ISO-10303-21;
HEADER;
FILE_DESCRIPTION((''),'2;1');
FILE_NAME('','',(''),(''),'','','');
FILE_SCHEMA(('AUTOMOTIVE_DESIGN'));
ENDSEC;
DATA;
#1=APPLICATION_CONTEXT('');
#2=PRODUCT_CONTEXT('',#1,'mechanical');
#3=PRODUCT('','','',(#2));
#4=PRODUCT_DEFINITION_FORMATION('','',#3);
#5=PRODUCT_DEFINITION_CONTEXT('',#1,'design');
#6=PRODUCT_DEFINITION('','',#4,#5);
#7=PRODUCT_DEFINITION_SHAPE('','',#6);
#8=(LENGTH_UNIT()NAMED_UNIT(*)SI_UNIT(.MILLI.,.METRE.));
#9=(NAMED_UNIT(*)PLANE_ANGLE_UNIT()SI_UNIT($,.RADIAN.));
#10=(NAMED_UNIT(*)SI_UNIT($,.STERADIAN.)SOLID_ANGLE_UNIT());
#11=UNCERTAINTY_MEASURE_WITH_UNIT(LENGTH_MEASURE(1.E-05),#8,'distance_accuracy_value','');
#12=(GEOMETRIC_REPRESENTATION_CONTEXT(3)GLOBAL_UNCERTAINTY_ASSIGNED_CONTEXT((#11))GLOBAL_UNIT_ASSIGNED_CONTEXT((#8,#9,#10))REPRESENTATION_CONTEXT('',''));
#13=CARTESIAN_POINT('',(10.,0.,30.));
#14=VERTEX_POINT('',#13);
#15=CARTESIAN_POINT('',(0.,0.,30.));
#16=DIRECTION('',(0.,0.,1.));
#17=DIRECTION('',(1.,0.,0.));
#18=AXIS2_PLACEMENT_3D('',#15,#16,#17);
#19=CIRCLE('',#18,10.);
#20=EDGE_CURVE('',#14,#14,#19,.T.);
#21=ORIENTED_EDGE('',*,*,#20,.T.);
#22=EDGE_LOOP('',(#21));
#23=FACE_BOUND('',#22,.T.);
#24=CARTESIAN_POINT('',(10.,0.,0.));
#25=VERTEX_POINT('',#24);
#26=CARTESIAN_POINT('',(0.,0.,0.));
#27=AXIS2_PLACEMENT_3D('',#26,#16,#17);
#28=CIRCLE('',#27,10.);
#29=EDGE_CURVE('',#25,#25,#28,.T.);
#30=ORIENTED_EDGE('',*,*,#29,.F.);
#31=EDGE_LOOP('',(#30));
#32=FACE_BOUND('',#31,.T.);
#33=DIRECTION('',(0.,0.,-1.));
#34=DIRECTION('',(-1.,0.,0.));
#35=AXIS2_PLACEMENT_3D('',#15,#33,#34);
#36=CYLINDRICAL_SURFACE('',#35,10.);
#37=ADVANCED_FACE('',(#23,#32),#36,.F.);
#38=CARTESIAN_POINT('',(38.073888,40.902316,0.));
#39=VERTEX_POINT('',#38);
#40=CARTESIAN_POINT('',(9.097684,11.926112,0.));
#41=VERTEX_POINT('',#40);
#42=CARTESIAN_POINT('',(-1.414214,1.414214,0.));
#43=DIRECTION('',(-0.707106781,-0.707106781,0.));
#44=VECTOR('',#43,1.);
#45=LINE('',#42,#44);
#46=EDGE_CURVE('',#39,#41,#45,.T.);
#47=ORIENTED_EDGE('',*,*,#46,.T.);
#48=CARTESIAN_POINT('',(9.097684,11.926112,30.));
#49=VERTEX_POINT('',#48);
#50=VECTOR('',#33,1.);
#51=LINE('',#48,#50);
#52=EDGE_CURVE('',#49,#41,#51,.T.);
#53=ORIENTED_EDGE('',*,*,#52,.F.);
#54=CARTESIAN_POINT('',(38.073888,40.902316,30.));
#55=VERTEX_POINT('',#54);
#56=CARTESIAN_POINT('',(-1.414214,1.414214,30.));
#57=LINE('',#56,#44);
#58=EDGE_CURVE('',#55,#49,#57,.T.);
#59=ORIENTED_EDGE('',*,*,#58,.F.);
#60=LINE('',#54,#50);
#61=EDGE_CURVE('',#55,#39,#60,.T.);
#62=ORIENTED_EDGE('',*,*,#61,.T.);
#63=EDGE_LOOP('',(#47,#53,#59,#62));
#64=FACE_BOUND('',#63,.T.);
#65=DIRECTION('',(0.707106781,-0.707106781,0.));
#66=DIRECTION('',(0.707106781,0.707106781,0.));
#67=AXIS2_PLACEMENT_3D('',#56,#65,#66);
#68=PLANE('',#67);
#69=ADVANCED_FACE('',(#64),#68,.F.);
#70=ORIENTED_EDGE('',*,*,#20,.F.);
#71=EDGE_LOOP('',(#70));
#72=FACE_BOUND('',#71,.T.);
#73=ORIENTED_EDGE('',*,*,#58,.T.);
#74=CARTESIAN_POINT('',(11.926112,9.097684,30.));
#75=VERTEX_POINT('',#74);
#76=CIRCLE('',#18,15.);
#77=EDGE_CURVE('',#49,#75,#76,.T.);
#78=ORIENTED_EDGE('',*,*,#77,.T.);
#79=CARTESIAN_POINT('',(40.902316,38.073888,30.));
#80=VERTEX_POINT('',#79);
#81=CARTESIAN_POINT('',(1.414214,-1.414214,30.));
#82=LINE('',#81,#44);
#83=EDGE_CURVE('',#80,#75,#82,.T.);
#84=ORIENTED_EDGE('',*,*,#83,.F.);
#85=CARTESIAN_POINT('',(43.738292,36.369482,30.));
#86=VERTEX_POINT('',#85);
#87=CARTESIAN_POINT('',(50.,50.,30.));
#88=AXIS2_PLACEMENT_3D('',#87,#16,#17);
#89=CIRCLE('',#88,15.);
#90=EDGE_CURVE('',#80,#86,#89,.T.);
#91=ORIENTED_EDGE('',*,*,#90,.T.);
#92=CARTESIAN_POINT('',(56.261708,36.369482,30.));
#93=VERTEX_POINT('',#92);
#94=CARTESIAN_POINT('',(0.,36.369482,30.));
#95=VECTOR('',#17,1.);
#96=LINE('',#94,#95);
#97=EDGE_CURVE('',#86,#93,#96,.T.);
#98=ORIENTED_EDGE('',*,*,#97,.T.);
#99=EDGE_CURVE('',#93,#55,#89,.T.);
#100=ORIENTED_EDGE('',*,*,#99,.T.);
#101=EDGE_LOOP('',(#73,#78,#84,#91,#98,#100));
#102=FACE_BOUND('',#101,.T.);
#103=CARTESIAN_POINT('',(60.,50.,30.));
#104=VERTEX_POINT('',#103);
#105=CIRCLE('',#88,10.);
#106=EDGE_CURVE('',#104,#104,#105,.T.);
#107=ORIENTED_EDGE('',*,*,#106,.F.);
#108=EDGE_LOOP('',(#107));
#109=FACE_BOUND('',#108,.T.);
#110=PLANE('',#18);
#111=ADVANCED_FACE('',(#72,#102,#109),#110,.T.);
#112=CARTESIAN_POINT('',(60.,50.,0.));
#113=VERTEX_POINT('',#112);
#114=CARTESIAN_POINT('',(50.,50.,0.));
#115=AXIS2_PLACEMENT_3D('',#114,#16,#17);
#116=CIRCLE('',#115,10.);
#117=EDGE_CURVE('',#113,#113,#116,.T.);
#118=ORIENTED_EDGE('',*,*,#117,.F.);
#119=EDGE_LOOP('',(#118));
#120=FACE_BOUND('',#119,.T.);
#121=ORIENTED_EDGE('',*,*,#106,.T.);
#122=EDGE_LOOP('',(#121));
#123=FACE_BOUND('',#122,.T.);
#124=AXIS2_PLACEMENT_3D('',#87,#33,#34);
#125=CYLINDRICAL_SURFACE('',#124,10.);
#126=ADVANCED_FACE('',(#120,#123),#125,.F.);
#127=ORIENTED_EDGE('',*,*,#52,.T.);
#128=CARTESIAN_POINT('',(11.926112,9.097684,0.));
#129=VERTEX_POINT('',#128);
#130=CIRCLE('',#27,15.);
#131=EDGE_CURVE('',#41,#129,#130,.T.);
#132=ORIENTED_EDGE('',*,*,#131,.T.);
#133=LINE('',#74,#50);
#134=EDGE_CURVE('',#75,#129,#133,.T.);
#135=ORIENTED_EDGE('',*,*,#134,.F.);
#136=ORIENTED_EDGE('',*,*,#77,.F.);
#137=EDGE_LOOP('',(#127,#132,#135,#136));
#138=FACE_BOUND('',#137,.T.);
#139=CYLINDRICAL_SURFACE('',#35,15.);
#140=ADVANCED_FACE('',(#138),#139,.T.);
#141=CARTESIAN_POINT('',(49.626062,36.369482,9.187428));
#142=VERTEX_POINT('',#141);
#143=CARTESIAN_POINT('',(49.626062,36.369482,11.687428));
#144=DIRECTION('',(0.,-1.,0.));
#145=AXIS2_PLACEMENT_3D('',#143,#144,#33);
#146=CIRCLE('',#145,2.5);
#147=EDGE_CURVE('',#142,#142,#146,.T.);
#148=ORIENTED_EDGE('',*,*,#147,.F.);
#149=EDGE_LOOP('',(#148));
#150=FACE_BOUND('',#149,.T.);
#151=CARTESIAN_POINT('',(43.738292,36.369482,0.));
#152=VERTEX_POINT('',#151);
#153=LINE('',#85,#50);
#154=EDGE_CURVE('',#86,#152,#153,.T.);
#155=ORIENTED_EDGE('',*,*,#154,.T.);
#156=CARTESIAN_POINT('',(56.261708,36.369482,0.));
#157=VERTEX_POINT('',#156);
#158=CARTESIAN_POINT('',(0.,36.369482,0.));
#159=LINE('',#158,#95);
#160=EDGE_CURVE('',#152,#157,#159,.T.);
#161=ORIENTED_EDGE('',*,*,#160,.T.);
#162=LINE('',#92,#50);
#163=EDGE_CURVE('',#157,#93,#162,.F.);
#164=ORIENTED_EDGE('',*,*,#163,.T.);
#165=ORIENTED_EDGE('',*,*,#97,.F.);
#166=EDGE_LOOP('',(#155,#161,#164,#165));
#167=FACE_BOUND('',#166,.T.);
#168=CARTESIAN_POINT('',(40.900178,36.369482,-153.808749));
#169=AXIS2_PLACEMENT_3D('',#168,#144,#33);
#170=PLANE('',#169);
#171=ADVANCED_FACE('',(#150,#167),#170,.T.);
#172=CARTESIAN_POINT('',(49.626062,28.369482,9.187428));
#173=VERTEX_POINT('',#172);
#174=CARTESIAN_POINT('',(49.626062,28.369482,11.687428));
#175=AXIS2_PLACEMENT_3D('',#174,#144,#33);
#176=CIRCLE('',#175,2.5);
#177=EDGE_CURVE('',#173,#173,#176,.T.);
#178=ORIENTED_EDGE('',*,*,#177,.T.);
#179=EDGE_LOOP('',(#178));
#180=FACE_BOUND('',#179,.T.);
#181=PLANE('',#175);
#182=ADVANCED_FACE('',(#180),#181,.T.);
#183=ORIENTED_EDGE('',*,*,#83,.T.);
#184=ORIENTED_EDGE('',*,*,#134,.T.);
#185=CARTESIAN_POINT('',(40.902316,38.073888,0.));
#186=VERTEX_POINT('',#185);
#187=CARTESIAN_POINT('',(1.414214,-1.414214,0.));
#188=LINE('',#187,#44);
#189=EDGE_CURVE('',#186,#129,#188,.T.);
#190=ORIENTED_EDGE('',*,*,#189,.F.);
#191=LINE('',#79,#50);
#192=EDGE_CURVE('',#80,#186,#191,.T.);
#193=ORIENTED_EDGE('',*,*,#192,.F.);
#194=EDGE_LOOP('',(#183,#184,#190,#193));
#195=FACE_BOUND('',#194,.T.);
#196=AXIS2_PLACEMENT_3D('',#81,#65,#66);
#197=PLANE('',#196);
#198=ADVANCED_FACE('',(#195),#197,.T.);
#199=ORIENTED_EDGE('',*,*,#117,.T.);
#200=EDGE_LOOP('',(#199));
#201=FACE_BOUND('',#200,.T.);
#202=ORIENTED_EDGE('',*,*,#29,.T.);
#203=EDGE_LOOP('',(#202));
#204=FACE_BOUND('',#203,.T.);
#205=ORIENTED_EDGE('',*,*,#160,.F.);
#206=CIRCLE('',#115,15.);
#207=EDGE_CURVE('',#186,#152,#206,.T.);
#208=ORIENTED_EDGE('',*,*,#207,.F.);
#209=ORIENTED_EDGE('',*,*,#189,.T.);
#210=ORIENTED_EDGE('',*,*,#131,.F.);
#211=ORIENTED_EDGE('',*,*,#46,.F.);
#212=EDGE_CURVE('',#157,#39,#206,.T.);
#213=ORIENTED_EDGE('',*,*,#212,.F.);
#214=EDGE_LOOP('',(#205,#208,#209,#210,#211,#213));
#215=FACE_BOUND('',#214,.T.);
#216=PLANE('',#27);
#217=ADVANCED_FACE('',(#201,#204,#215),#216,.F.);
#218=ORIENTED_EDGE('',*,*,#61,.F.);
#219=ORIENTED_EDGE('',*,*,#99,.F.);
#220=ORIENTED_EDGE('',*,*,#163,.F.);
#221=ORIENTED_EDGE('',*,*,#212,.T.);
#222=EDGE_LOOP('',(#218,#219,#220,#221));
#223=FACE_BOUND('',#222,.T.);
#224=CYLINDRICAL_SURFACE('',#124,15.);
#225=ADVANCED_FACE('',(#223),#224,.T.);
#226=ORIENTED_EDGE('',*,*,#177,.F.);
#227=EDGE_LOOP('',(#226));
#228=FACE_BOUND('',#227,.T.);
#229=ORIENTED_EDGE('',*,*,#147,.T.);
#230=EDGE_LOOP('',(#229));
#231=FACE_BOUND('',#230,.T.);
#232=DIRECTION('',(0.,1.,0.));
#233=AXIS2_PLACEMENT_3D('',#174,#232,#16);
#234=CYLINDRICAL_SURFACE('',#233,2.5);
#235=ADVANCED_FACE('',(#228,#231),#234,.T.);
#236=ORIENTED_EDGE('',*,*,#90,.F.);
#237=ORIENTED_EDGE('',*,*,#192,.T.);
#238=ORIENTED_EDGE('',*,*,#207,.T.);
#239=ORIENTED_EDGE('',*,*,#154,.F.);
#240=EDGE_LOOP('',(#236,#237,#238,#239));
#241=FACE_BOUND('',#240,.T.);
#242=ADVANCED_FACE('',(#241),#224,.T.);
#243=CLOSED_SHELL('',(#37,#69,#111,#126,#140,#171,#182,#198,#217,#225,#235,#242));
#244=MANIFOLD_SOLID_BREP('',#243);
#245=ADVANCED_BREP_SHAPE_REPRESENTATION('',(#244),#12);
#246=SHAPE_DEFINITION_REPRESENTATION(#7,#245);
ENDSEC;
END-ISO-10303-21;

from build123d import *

# Parameters (mm, degrees)
SKETCH_1_R          = 15
SKETCH_1_R_2        = 10
EXTRUDE_1_DEPTH     = 30
CUT_EXTRUDE_START   = -30
CUT_EXTRUDE_1_DEPTH = 30
SKETCH_3_R          = 2.5
EXTRUDE_2_DEPTH     = 8


# Read off the part's stored shape, not the designer's step: 切除-拉伸1
with BuildPart() as part:
    # 草图1 → 凸台-拉伸1 (new body)
    # profile 1 of 3: a face of its own
    with BuildSketch(Plane.XY):
        Circle(SKETCH_1_R)
        Circle(SKETCH_1_R_2, mode=Mode.SUBTRACT)
    # profile 2 of 3: a face of its own
    with BuildSketch(Plane.XY):
        with BuildLine():
            ThreePointArc((40.902315542, 38.073888417), (39.393398282, 39.393398282), (38.073888417, 40.902315542))
            Line((38.073888417, 40.902315542), (9.097684458, 11.926111583))
            ThreePointArc((9.097684458, 11.926111583), (10.606601718, 10.606601718), (11.926111583, 9.097684458))
            Line((11.926111583, 9.097684458), (40.902315542, 38.073888417))
        make_face()
    # profile 3 of 3: a face of its own
    with BuildSketch(Plane.XY):
        with Locations((50, 50)):
            Circle(SKETCH_1_R)
        with Locations((50, 50)):
            Circle(SKETCH_1_R_2, mode=Mode.SUBTRACT)
    extrude(amount=EXTRUDE_1_DEPTH)

    # 切除-拉伸1 outline → 切除-拉伸1 (cut)
    with BuildSketch(Plane.XY.offset(30).offset(CUT_EXTRUDE_START)):
        with BuildLine():
            Line((56.261708011, 36.3694823), (43.738291989, 36.3694823))
            ThreePointArc((43.738291989, 36.3694823), (50, 35), (56.261708011, 36.3694823))
        make_face()
    extrude(amount=CUT_EXTRUDE_1_DEPTH, mode=Mode.SUBTRACT)

    # 草图3 → 凸台-拉伸2 (add)
    with BuildSketch(Plane(origin=(0, 36.369482299, 0), x_dir=(-1, 0, 0), z_dir=(0, -1, 0))):
        with Locations(Location((-49.626061582, -11.687427951, 0), (0, 0, 90))):
            Circle(SKETCH_3_R)
    extrude(amount=EXTRUDE_2_DEPTH)


solid = part.part
